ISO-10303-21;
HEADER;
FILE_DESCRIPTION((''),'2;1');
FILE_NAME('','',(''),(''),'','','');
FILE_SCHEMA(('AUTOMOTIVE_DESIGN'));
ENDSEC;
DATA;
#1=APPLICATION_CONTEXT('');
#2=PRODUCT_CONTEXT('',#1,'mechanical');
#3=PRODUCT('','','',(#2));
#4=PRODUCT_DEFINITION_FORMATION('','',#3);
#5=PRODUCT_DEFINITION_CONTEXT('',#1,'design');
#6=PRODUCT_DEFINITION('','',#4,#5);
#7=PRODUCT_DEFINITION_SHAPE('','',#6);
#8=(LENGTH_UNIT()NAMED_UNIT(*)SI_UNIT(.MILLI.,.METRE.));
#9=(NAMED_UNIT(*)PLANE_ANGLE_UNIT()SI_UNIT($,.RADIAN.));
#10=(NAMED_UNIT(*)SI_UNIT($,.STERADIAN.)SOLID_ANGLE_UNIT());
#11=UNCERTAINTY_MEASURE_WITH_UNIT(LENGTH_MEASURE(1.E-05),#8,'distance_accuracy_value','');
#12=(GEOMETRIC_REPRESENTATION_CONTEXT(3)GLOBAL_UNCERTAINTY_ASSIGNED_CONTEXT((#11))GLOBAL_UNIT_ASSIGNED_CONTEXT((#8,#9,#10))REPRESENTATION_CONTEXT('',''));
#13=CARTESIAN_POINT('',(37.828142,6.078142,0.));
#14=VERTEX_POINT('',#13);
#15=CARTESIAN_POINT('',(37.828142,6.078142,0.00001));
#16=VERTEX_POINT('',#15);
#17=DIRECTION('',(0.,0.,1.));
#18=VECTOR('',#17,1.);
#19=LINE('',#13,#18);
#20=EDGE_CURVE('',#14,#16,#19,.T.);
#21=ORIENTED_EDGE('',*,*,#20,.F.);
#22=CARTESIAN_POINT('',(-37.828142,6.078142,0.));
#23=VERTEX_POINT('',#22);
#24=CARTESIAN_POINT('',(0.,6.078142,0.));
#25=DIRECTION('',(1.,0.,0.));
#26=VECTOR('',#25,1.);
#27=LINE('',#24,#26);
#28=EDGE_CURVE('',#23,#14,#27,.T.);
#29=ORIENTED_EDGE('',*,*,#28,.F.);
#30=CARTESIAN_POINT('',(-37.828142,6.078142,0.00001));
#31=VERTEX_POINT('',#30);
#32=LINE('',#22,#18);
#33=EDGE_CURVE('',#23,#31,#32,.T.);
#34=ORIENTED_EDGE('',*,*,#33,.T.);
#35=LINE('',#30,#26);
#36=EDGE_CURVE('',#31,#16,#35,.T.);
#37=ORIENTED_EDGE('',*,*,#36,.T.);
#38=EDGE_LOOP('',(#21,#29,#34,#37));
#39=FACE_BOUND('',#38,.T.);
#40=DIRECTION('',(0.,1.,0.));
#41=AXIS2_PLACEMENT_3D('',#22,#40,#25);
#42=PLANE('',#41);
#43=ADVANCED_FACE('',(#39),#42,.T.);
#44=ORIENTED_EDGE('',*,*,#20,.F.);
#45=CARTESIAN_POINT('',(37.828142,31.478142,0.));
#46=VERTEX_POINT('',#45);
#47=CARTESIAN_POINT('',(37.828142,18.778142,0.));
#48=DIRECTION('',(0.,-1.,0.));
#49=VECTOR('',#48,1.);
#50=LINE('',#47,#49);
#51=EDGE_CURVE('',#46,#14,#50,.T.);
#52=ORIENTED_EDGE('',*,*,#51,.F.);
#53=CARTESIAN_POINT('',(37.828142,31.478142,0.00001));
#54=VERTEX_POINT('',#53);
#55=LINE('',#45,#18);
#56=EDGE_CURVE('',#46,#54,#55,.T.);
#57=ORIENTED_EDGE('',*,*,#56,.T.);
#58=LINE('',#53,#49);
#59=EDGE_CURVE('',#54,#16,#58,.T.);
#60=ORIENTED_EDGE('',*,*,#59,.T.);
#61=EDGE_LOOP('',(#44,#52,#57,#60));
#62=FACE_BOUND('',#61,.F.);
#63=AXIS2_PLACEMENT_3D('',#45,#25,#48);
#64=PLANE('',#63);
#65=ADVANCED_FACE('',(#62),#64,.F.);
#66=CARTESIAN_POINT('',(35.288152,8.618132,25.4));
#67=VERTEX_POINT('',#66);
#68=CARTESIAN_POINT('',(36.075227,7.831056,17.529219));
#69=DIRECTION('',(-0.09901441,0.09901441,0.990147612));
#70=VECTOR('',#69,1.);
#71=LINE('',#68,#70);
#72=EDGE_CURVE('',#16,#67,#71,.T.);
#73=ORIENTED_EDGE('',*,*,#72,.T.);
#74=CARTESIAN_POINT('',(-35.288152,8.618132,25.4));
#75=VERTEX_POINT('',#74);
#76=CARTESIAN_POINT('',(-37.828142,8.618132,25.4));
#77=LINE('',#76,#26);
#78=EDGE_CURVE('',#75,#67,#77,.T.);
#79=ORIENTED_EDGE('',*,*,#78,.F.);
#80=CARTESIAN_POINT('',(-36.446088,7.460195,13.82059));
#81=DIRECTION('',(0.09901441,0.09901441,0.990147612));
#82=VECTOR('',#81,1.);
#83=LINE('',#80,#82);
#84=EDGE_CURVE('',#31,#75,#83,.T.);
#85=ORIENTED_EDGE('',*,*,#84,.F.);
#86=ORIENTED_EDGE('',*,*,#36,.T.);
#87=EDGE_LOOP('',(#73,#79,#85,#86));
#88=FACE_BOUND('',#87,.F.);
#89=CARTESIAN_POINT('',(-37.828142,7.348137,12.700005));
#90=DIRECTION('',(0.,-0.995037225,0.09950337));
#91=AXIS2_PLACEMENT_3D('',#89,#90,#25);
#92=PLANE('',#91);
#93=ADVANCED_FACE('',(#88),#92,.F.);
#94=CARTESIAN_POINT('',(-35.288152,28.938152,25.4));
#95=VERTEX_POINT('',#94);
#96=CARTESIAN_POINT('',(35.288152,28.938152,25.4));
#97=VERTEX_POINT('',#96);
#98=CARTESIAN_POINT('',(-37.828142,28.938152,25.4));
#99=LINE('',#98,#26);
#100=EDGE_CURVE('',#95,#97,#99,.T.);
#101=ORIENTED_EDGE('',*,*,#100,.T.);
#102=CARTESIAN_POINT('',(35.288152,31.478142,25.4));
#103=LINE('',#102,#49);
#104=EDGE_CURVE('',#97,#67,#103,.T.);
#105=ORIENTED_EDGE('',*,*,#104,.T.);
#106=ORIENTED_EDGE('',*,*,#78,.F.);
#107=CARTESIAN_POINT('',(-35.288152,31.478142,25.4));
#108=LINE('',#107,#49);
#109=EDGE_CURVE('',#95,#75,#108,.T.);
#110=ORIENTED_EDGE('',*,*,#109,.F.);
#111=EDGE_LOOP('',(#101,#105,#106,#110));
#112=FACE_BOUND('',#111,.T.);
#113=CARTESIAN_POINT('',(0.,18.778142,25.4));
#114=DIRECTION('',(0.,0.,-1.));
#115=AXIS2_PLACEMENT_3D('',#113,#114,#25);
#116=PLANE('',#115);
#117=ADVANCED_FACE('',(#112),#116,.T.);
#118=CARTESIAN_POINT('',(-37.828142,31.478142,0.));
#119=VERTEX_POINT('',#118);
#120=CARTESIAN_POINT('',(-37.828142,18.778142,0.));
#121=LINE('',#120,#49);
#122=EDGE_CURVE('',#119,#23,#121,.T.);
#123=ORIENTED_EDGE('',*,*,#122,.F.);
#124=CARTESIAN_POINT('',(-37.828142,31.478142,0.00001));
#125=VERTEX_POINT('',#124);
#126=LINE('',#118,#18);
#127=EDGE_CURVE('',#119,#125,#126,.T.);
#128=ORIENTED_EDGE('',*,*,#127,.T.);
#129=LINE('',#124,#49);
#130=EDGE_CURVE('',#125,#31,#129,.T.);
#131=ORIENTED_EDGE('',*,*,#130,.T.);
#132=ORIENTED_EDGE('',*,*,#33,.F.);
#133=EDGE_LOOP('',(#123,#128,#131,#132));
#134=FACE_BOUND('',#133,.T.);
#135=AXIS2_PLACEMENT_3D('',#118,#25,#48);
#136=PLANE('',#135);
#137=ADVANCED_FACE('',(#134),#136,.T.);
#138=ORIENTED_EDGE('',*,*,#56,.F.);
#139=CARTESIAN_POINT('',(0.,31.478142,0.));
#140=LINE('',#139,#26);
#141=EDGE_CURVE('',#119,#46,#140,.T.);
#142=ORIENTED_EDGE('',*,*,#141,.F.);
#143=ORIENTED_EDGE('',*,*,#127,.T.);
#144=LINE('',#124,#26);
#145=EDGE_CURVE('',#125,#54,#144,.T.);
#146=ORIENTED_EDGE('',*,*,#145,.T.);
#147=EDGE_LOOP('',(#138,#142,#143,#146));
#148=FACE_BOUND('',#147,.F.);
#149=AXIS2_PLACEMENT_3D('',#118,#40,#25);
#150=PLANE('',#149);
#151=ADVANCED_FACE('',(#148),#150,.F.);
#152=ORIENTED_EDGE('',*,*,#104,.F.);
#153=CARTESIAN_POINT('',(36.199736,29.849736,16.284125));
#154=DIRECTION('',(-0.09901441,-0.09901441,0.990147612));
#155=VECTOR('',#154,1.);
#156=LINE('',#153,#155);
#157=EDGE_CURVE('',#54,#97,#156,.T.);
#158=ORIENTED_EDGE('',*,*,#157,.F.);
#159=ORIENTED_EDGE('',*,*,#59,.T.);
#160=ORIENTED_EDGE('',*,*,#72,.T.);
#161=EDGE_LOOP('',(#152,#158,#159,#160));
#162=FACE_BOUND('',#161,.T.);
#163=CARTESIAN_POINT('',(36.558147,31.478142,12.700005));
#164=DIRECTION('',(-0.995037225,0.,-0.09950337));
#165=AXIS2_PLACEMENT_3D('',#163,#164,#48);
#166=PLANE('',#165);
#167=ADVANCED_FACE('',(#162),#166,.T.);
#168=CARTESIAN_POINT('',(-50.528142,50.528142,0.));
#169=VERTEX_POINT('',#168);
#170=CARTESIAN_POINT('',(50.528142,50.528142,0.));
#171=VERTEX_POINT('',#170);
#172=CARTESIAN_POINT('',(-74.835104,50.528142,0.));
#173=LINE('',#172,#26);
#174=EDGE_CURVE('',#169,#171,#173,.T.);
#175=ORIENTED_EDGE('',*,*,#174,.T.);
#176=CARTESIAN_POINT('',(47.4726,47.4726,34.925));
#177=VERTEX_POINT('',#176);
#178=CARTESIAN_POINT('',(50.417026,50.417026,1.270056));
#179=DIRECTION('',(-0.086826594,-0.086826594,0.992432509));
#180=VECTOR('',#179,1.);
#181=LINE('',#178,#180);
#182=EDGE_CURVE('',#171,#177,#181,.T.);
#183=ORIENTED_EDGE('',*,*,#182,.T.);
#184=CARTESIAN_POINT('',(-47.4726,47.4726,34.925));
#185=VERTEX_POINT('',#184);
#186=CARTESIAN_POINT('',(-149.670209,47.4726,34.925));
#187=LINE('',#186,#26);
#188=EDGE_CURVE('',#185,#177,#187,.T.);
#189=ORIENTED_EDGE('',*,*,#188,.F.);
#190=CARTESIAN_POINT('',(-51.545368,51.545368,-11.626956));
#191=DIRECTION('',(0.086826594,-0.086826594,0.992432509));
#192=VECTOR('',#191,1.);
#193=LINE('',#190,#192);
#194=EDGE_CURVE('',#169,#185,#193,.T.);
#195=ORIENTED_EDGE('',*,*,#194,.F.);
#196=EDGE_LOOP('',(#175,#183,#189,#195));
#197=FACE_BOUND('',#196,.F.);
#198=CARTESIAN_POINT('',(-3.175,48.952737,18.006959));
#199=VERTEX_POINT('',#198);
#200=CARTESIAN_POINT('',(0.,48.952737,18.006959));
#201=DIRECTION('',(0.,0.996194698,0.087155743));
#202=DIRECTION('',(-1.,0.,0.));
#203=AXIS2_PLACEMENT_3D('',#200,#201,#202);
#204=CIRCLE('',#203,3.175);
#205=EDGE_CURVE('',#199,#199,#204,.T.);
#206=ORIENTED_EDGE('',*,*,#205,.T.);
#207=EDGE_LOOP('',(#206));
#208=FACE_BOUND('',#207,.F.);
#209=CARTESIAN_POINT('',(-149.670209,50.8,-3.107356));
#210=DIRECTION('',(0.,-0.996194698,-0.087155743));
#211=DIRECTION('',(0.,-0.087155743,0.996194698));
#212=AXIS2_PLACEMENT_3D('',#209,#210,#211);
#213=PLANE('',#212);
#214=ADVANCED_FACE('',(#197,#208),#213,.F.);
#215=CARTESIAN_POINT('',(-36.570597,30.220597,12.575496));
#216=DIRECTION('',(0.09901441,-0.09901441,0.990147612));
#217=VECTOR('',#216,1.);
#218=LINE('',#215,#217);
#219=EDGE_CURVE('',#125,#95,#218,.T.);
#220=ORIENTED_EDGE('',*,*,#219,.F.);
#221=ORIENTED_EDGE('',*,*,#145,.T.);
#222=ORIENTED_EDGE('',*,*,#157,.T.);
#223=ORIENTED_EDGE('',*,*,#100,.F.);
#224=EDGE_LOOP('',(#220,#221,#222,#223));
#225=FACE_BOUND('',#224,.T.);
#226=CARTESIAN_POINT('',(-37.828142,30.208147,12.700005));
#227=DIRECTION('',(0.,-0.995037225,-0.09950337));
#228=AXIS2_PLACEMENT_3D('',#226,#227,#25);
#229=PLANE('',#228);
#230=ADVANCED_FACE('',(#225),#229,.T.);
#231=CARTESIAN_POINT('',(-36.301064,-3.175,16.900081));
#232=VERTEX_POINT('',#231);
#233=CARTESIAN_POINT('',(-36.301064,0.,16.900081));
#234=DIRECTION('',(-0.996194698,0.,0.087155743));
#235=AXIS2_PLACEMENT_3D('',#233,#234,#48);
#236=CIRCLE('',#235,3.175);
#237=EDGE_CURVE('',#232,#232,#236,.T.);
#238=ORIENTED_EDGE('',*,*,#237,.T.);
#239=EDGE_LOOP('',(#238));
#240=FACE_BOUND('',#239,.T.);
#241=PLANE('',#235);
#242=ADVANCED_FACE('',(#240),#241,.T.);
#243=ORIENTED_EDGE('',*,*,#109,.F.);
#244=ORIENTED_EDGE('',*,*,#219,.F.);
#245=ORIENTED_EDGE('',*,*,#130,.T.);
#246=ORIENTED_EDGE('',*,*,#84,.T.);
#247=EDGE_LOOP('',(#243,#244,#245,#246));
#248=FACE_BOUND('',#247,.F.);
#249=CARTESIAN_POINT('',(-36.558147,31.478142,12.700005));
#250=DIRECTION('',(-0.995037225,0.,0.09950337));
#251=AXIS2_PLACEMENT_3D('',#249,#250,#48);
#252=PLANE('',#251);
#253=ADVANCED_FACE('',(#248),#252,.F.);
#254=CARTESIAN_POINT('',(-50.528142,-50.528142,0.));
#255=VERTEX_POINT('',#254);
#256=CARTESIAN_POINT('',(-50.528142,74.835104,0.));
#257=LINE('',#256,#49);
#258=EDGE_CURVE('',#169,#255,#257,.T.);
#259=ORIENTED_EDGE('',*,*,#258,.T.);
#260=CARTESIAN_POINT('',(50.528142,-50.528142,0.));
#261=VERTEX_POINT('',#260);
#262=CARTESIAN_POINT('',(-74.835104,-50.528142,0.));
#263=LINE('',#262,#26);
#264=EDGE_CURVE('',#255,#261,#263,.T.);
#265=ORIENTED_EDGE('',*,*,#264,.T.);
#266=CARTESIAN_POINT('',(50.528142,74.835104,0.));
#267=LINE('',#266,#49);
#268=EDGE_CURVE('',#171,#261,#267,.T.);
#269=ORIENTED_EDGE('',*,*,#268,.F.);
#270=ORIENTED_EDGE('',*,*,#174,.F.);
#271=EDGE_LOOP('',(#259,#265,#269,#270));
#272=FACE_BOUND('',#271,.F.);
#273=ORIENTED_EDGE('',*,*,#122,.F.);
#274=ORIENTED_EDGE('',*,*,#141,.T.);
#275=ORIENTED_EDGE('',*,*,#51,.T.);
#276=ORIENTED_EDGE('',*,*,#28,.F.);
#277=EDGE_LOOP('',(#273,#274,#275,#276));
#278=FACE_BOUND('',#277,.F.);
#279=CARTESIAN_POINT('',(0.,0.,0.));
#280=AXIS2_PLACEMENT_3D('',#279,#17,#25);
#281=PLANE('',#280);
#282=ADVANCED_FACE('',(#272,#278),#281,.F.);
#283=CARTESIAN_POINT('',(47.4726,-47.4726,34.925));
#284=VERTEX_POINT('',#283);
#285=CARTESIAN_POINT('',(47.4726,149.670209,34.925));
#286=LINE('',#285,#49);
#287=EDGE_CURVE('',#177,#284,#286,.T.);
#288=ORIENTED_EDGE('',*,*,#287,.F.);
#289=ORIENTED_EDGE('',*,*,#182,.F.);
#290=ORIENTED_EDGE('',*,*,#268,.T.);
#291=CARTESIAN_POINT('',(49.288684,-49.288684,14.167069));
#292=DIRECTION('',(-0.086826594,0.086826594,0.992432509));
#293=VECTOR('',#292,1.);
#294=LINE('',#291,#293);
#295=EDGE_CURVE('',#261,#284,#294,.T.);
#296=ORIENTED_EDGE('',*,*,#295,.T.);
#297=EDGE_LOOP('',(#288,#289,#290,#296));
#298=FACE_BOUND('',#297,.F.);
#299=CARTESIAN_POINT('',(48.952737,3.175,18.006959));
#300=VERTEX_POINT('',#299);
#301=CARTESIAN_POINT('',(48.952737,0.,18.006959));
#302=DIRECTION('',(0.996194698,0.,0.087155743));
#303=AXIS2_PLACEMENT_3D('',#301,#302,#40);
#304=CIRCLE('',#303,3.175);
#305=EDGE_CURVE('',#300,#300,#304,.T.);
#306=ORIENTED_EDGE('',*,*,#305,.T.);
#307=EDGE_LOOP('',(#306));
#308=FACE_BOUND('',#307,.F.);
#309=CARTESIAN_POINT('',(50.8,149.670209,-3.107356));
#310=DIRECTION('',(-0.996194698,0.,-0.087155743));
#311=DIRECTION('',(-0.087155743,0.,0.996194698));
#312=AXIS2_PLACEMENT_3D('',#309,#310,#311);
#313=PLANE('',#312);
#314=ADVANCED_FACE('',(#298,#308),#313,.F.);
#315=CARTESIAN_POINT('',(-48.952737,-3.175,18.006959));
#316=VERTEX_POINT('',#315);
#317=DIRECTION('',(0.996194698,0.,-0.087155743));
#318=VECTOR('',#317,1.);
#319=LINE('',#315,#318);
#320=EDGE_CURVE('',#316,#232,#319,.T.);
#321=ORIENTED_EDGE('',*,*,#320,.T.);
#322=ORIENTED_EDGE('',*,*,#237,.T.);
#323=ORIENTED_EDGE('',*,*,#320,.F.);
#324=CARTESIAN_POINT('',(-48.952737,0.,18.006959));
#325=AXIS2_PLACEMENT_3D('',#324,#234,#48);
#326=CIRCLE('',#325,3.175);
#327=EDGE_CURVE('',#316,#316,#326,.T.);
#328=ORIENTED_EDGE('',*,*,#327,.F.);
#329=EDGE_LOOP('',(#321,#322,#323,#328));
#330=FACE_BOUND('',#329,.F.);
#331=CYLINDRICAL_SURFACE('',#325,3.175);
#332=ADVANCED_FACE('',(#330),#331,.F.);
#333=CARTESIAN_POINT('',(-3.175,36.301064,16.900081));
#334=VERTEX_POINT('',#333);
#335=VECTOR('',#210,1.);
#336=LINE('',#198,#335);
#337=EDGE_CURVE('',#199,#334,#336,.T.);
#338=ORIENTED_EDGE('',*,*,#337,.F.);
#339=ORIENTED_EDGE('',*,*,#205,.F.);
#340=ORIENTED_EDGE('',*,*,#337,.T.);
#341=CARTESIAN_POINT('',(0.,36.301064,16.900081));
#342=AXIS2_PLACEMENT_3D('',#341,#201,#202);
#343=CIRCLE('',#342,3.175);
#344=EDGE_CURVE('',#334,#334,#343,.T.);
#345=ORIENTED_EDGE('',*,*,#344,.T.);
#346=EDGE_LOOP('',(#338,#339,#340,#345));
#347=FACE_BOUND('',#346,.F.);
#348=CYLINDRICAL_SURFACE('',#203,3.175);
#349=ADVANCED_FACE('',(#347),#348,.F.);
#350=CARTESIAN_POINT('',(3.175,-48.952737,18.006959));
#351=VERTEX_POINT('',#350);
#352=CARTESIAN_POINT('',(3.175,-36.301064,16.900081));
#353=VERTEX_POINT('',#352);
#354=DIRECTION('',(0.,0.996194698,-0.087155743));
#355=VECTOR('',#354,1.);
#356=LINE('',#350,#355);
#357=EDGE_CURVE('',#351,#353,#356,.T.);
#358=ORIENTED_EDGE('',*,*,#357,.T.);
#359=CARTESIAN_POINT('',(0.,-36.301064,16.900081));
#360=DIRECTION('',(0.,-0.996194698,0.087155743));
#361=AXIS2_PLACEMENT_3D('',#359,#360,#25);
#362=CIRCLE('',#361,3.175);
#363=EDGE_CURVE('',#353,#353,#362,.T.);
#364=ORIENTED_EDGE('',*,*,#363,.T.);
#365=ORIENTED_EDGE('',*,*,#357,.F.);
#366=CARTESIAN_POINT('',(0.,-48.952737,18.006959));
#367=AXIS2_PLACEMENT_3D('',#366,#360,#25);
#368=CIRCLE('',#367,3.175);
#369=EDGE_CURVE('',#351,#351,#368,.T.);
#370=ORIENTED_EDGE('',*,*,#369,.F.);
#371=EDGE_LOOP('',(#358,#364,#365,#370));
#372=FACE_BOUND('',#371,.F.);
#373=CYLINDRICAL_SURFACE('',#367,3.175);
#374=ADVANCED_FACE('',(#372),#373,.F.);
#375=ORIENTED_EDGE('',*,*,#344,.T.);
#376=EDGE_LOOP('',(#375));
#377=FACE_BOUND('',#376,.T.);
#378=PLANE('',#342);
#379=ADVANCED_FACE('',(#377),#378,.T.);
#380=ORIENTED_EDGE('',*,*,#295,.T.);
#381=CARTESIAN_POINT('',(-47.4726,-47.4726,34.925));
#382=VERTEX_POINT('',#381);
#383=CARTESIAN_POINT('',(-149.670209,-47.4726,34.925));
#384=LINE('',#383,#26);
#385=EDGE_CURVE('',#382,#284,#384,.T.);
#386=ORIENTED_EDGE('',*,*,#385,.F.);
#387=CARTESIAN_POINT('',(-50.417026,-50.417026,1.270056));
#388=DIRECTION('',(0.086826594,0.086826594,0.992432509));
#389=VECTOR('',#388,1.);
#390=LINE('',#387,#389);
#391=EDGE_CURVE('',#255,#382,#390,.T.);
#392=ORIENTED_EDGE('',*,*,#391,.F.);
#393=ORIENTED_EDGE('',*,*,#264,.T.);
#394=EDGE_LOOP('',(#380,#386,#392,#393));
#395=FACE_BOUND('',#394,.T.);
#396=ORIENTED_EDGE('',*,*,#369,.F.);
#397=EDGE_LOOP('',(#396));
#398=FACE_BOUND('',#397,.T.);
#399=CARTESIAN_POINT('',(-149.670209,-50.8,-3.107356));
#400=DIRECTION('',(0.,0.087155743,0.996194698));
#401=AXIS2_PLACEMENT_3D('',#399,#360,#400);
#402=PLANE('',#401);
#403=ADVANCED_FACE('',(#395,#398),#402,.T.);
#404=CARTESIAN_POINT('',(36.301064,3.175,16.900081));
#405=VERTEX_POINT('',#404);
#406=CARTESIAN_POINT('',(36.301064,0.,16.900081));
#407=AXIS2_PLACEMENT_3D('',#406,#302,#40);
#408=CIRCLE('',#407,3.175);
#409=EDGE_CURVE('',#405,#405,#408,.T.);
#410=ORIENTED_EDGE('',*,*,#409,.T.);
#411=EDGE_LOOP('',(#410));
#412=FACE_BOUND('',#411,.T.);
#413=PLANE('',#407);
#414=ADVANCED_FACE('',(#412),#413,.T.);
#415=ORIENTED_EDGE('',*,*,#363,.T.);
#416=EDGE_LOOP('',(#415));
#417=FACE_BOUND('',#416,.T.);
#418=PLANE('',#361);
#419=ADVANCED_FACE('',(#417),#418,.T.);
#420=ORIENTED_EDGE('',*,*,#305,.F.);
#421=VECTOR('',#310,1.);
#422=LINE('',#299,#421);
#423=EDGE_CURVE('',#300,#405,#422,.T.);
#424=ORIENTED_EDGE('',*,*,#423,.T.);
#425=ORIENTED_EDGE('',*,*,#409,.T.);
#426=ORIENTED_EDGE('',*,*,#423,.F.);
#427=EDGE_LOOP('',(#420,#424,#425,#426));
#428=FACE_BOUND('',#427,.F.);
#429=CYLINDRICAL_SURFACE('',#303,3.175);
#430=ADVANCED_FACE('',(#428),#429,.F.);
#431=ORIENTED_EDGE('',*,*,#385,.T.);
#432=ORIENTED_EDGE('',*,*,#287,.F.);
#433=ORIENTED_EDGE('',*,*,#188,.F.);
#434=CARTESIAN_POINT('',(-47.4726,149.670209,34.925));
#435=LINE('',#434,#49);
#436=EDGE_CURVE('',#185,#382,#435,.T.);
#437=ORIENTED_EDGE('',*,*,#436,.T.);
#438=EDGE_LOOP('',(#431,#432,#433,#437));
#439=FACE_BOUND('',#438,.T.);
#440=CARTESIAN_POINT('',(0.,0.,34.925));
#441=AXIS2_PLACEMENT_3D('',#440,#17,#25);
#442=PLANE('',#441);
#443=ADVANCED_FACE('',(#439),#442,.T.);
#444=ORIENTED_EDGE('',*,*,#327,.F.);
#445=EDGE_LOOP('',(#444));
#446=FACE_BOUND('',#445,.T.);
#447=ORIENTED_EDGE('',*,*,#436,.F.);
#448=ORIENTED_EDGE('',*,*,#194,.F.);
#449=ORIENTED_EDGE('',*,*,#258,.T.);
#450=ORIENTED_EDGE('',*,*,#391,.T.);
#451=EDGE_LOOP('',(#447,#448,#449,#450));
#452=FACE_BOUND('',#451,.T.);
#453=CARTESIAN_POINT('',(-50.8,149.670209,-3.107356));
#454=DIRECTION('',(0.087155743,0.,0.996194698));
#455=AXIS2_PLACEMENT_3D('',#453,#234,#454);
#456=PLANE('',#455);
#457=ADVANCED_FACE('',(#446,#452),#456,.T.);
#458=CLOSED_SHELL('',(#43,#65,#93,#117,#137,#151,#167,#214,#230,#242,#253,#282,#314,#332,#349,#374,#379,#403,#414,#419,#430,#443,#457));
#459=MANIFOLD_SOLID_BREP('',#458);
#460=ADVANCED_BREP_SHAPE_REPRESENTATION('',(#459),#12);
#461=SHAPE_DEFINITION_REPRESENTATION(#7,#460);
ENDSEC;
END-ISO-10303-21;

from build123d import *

# Parameters (mm, degrees)
F0_W        = 101.6
F0_H        = 101.6
F1_DEPTH    = 34.925
F2_T1_DEPTH = 299.3404177556
F2_T3_DEPTH = 299.3404177556
F3_R        = 3.175
F4_DEPTH    = 12.7
F5_R        = 3.175
F6_DEPTH    = 12.7
F7_R        = 3.175
F8_DEPTH    = 12.7
F9_R        = 3.175
F10_DEPTH   = 12.7
F11_W       = 75.6562831473
F11_H       = 25.4
F12_DEPTH   = 25.4
F13_SIZE2   = 2.53999
F13_SIZE    = 25.39999


# Not quite as in the source:
# - a fillet or chamfer that OpenCascade refuses, or shapes differently, is made with other operations: its cross-section is extruded or revolved along the edge and cut away or added
# - a fillet or chamfer is up to 0.001 mm smaller than in the source, because OpenCascade refuses the exact size


with BuildPart() as f1:
    # F0 (on Top) → F1 (new body)
    with BuildSketch(Plane.XY):
        Rectangle(F0_W, F0_H)
    extrude(amount=F1_DEPTH)

    # F2: chamfer of 3.3274 x 38.0323560322 on 4 edges, made by hand

    # F2_s2 → F2_t1 (cut)
    with BuildSketch(Plane.XZ.offset(-149.6702088778)):
        Polygon((-50.8, -3.1073560322), (-47.4726, 34.925), (-50.8, 34.925), align=None)
        Polygon((50.8, -3.1073560322), (47.4726, 34.925), (50.8, 34.925), align=None)
    extrude(amount=F2_T1_DEPTH, mode=Mode.SUBTRACT)

    # F2_s4 → F2_t3 (cut)
    with BuildSketch(Plane.YZ.offset(-149.6702088778)):
        Polygon((-50.8, -3.1073560322), (-47.4726, 34.925), (-50.8, 34.925), align=None)
        Polygon((50.8, -3.1073560322), (47.4726, 34.925), (50.8, 34.925), align=None)
    extrude(amount=F2_T3_DEPTH, mode=Mode.SUBTRACT)

    # F3 (on face) → F4 (cut)
    with BuildSketch(Plane(origin=(0, 50.1443235703, 4.3870598526), x_dir=(-1, 0, 0), z_dir=(0, 0.9961946981, 0.0871557427))):
        with Locations((0, 13.6719250414)):
            Circle(F3_R)
    extrude(amount=-F4_DEPTH, mode=Mode.SUBTRACT)

    # F5 (on face) → F6 (cut)
    with BuildSketch(Plane(origin=(0, -50.1443235703, 4.3870598526), x_dir=(1, 0, 0), z_dir=(0, -0.9961946981, 0.0871557427))):
        with Locations((0, 13.6719250414)):
            Circle(F5_R)
    extrude(amount=-F6_DEPTH, mode=Mode.SUBTRACT)

    # F7 (on face) → F8 (cut)
    with BuildSketch(Plane(origin=(50.1443235703, 0, 4.3870598526), x_dir=(0, 1, 0), z_dir=(0.9961946981, 0, 0.0871557427))):
        with Locations((0, 13.6719250414)):
            Circle(F7_R)
    extrude(amount=-F8_DEPTH, mode=Mode.SUBTRACT)

    # F9 (on face) → F10 (cut)
    with BuildSketch(Plane(origin=(-50.1443235703, 0, 4.3870598526), x_dir=(0, -1, 0), z_dir=(-0.9961946981, 0, 0.0871557427))):
        with Locations((0, 13.6719250414)):
            Circle(F9_R)
    extrude(amount=-F10_DEPTH, mode=Mode.SUBTRACT)

    # F11 (on face) → F12 (cut)
    with BuildSketch(Plane(origin=(0, 0, 0), x_dir=(1, 0, 0), z_dir=(0, 0, -1))):
        with Locations((0, -18.7781415736)):
            Rectangle(F11_W, F11_H)
    extrude(amount=-F12_DEPTH, mode=Mode.SUBTRACT)

    # F13 (size 25.4 and 2.54 in the source; OpenCascade refuses exactly that, so slightly less here)
    f13_edges = [f1.edges().sort_by_distance(p)[0] for p in [
        (0, 6.078142, 25.4),
        (-37.828142, 18.778142, 25.4),
        (37.828142, 18.778142, 25.4),
        (0, 31.478142, 25.4),
    ]]
    chamfer(f13_edges, length=F13_SIZE, length2=F13_SIZE2)


solid = f1.part
